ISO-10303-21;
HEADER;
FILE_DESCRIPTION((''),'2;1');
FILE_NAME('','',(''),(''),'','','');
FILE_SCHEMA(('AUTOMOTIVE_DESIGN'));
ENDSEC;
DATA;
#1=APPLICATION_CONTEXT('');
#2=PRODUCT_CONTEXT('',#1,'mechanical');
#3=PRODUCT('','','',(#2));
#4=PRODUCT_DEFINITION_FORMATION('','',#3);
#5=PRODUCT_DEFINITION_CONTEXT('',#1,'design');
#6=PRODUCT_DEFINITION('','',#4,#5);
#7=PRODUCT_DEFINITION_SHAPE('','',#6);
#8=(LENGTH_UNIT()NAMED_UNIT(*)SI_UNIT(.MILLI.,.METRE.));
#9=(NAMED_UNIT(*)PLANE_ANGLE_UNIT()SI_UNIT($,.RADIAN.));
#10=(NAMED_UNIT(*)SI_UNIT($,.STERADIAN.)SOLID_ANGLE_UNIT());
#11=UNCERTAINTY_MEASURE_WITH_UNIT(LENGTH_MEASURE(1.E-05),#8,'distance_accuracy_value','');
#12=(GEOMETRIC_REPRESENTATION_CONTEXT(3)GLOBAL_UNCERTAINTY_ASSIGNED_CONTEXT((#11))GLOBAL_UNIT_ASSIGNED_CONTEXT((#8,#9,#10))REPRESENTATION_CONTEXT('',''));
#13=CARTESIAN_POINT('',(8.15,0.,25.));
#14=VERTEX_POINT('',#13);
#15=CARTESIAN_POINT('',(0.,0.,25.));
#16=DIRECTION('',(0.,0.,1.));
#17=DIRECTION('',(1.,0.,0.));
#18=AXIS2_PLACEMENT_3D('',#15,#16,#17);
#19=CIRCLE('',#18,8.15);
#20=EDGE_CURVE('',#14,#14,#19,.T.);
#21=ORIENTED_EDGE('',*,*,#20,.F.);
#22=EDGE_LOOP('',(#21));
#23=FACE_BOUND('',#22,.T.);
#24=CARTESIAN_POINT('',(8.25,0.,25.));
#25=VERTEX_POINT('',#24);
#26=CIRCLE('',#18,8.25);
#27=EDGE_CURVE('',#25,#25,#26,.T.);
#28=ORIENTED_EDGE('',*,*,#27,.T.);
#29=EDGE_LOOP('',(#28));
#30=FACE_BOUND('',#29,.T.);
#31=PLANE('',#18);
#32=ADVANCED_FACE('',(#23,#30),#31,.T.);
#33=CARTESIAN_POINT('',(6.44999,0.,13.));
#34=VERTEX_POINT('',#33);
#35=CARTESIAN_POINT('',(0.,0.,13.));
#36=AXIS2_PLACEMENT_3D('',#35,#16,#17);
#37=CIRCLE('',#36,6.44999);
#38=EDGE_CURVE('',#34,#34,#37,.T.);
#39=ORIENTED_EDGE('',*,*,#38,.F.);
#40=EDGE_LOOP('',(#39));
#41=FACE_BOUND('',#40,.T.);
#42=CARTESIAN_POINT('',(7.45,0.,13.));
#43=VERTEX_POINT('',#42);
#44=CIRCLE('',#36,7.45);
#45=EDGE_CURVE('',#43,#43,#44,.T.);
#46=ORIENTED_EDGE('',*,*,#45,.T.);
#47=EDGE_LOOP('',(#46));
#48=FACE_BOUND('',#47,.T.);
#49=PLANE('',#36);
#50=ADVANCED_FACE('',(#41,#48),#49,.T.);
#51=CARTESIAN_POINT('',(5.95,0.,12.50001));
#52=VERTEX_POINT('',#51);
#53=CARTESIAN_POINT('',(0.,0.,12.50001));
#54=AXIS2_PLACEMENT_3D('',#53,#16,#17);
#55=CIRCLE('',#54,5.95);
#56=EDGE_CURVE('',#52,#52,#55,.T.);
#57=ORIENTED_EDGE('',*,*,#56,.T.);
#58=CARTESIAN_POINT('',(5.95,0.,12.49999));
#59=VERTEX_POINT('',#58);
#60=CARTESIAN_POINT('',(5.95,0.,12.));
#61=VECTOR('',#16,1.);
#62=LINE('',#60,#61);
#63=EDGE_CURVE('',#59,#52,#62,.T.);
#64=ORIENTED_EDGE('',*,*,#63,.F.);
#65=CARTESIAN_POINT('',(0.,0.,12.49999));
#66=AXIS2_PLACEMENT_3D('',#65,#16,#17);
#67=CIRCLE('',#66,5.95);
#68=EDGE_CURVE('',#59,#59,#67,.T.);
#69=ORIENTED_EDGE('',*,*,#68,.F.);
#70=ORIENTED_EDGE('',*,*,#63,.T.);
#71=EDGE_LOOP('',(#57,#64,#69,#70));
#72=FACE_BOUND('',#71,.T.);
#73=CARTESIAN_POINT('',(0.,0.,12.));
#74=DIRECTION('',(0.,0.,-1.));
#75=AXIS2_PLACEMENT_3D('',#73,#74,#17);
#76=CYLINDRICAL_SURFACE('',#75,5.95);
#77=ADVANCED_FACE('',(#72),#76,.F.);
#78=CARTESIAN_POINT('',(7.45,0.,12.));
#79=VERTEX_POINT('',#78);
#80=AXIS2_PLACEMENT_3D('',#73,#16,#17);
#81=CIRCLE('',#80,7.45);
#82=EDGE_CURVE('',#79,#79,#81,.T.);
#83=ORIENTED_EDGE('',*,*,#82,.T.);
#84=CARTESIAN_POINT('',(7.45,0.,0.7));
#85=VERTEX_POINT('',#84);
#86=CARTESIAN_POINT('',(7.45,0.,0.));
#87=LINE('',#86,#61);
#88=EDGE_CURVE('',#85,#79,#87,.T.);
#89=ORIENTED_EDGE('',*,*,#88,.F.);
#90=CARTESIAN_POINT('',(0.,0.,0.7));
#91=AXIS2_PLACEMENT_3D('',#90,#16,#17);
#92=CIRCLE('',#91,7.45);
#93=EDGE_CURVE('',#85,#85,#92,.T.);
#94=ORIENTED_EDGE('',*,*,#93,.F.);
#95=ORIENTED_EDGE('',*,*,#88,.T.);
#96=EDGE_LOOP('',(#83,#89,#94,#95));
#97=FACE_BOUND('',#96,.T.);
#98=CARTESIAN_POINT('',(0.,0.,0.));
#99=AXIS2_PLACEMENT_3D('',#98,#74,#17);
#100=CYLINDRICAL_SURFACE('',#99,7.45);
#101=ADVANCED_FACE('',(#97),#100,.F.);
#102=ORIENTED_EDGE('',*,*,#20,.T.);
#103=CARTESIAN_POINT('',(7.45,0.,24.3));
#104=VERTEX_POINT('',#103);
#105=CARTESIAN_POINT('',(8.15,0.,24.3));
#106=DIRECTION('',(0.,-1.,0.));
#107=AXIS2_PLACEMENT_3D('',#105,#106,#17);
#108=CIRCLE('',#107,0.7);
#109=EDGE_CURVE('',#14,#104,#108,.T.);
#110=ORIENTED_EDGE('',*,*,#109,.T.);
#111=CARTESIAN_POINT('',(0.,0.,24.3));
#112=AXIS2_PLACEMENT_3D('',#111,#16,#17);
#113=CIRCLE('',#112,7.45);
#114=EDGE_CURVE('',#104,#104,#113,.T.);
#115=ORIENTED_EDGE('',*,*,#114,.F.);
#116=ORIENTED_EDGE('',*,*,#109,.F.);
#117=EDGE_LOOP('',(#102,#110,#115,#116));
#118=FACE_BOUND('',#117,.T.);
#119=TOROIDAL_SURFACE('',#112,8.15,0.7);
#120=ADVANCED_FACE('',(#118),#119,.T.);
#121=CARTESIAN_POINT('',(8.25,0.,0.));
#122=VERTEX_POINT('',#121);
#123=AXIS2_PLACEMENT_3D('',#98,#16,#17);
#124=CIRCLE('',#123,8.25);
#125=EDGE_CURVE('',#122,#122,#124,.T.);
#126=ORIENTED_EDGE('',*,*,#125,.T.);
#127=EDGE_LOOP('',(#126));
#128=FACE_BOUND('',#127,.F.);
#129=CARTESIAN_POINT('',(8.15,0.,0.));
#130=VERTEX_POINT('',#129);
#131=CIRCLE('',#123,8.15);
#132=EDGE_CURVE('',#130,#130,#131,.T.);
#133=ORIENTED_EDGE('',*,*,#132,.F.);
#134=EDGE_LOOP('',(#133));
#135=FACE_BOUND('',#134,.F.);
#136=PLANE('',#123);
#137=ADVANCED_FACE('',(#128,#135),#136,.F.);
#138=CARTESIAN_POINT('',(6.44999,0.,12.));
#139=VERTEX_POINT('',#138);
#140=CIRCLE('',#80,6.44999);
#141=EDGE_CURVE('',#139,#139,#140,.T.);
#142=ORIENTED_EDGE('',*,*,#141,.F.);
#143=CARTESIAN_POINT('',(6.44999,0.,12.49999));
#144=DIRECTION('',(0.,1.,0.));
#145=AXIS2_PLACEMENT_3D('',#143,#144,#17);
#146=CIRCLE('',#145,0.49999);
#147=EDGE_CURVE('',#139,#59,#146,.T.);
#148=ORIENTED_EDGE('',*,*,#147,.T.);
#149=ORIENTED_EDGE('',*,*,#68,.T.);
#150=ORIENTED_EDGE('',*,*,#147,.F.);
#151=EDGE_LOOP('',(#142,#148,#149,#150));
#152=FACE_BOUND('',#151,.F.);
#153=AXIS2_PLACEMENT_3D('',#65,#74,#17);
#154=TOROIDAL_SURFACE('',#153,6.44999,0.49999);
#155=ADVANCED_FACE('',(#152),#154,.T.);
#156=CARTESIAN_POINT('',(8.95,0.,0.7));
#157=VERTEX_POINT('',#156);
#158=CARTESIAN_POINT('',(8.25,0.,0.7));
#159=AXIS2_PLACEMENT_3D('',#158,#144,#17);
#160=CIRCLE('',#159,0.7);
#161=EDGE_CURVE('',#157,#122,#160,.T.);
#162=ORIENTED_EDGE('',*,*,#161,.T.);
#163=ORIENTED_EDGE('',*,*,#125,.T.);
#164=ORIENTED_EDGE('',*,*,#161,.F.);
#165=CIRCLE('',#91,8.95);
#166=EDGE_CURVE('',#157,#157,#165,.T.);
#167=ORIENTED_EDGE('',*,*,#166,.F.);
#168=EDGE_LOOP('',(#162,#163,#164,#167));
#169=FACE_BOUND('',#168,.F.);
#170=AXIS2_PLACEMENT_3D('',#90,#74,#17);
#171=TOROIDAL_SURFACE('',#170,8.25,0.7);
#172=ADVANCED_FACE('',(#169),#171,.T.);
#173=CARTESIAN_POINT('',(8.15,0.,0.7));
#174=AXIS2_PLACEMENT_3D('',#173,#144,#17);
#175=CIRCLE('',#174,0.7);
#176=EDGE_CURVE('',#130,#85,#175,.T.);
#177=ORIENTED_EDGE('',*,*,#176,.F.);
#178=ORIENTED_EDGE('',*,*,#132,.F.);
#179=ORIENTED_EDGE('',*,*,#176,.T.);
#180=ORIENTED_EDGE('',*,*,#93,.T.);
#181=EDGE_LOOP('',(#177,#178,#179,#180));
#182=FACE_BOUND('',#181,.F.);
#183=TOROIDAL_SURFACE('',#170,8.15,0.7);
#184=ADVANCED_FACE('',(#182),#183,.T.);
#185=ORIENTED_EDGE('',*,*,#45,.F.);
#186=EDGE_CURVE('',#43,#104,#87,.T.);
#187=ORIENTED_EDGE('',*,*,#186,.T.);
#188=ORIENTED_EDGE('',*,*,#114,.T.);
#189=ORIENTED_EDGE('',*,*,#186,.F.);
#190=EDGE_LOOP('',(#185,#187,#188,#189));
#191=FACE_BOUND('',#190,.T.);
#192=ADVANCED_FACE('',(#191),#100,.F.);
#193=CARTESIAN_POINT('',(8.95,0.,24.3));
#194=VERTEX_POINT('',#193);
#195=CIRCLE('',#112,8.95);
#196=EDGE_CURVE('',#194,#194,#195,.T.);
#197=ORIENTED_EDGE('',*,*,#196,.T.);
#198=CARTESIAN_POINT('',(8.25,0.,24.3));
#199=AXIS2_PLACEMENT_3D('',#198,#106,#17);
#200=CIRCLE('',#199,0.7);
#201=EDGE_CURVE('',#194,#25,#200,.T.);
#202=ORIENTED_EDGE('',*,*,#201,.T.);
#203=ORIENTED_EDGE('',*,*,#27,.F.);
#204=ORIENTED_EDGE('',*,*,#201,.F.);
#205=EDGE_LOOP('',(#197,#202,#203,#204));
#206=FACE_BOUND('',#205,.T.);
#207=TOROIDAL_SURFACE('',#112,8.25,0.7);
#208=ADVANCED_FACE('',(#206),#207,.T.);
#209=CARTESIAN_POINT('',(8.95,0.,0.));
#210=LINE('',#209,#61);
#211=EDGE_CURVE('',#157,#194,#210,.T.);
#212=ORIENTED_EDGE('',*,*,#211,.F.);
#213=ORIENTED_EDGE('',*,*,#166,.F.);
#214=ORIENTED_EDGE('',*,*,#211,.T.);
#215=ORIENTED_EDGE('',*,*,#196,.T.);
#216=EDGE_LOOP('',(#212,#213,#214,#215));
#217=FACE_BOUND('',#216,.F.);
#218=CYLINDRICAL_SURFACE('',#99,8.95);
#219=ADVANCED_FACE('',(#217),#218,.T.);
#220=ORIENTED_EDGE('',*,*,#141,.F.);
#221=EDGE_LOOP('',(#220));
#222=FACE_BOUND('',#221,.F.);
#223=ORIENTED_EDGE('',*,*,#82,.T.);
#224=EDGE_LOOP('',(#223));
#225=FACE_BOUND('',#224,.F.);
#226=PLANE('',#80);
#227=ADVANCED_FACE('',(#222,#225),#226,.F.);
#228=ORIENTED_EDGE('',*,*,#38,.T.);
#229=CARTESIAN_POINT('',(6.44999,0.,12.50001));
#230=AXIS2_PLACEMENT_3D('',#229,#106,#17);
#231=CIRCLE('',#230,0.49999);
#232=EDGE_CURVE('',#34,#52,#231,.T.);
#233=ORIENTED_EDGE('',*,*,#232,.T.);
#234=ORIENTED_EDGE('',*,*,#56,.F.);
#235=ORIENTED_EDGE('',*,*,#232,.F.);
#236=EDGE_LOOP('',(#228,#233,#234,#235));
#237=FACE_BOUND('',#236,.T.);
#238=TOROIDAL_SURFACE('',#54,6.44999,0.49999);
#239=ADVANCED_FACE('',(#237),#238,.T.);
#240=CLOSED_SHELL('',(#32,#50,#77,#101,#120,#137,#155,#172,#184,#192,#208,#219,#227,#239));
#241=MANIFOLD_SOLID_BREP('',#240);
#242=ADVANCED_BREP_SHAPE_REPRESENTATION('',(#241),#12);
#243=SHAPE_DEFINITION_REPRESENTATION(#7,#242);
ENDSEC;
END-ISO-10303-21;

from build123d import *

# Parameters (mm, degrees)
F0_R     = 8.95
F0_R_2   = 7.45
F1_DEPTH = 25
F2_START = 12
F0_R_3   = 5.95
F2_DEPTH = 1
F3_R     = 0.7
F4_R     = 0.49999


# Not quite as in the source:
# - a fillet or chamfer is up to 0.001 mm smaller than in the source, because OpenCascade refuses the exact size


with BuildPart() as f1:
    # F0 (on Top) → F1 (new body)
    with BuildSketch(Plane.XY):
        Circle(F0_R)
        Circle(F0_R_2, mode=Mode.SUBTRACT)
    extrude(amount=F1_DEPTH)

    # F0 (on Top) → F2 (join)
    with BuildSketch(Plane.XY.offset(F2_START)):
        Circle(F0_R_2)
        Circle(F0_R_3, mode=Mode.SUBTRACT)
    extrude(amount=F2_DEPTH)

    # F3
    f3_edges = [f1.edges().sort_by_distance(p)[0] for p in [
        (-8.95, 0, 25),
        (-7.45, 0, 25),
        (-8.95, 0, 0),
        (-7.45, 0, 0),
    ]]
    fillet(f3_edges, radius=F3_R)

    # F4 (radius 0.5 in the source; OpenCascade refuses exactly that, so slightly less here)
    f4_edges = [f1.edges().sort_by_distance(p)[0] for p in [
        (5.95, 0, 12.5),
        (-5.95, 0, 12),
        (-5.95, 0, 13),
    ]]
    fillet(f4_edges, radius=F4_R)


solid = f1.part
